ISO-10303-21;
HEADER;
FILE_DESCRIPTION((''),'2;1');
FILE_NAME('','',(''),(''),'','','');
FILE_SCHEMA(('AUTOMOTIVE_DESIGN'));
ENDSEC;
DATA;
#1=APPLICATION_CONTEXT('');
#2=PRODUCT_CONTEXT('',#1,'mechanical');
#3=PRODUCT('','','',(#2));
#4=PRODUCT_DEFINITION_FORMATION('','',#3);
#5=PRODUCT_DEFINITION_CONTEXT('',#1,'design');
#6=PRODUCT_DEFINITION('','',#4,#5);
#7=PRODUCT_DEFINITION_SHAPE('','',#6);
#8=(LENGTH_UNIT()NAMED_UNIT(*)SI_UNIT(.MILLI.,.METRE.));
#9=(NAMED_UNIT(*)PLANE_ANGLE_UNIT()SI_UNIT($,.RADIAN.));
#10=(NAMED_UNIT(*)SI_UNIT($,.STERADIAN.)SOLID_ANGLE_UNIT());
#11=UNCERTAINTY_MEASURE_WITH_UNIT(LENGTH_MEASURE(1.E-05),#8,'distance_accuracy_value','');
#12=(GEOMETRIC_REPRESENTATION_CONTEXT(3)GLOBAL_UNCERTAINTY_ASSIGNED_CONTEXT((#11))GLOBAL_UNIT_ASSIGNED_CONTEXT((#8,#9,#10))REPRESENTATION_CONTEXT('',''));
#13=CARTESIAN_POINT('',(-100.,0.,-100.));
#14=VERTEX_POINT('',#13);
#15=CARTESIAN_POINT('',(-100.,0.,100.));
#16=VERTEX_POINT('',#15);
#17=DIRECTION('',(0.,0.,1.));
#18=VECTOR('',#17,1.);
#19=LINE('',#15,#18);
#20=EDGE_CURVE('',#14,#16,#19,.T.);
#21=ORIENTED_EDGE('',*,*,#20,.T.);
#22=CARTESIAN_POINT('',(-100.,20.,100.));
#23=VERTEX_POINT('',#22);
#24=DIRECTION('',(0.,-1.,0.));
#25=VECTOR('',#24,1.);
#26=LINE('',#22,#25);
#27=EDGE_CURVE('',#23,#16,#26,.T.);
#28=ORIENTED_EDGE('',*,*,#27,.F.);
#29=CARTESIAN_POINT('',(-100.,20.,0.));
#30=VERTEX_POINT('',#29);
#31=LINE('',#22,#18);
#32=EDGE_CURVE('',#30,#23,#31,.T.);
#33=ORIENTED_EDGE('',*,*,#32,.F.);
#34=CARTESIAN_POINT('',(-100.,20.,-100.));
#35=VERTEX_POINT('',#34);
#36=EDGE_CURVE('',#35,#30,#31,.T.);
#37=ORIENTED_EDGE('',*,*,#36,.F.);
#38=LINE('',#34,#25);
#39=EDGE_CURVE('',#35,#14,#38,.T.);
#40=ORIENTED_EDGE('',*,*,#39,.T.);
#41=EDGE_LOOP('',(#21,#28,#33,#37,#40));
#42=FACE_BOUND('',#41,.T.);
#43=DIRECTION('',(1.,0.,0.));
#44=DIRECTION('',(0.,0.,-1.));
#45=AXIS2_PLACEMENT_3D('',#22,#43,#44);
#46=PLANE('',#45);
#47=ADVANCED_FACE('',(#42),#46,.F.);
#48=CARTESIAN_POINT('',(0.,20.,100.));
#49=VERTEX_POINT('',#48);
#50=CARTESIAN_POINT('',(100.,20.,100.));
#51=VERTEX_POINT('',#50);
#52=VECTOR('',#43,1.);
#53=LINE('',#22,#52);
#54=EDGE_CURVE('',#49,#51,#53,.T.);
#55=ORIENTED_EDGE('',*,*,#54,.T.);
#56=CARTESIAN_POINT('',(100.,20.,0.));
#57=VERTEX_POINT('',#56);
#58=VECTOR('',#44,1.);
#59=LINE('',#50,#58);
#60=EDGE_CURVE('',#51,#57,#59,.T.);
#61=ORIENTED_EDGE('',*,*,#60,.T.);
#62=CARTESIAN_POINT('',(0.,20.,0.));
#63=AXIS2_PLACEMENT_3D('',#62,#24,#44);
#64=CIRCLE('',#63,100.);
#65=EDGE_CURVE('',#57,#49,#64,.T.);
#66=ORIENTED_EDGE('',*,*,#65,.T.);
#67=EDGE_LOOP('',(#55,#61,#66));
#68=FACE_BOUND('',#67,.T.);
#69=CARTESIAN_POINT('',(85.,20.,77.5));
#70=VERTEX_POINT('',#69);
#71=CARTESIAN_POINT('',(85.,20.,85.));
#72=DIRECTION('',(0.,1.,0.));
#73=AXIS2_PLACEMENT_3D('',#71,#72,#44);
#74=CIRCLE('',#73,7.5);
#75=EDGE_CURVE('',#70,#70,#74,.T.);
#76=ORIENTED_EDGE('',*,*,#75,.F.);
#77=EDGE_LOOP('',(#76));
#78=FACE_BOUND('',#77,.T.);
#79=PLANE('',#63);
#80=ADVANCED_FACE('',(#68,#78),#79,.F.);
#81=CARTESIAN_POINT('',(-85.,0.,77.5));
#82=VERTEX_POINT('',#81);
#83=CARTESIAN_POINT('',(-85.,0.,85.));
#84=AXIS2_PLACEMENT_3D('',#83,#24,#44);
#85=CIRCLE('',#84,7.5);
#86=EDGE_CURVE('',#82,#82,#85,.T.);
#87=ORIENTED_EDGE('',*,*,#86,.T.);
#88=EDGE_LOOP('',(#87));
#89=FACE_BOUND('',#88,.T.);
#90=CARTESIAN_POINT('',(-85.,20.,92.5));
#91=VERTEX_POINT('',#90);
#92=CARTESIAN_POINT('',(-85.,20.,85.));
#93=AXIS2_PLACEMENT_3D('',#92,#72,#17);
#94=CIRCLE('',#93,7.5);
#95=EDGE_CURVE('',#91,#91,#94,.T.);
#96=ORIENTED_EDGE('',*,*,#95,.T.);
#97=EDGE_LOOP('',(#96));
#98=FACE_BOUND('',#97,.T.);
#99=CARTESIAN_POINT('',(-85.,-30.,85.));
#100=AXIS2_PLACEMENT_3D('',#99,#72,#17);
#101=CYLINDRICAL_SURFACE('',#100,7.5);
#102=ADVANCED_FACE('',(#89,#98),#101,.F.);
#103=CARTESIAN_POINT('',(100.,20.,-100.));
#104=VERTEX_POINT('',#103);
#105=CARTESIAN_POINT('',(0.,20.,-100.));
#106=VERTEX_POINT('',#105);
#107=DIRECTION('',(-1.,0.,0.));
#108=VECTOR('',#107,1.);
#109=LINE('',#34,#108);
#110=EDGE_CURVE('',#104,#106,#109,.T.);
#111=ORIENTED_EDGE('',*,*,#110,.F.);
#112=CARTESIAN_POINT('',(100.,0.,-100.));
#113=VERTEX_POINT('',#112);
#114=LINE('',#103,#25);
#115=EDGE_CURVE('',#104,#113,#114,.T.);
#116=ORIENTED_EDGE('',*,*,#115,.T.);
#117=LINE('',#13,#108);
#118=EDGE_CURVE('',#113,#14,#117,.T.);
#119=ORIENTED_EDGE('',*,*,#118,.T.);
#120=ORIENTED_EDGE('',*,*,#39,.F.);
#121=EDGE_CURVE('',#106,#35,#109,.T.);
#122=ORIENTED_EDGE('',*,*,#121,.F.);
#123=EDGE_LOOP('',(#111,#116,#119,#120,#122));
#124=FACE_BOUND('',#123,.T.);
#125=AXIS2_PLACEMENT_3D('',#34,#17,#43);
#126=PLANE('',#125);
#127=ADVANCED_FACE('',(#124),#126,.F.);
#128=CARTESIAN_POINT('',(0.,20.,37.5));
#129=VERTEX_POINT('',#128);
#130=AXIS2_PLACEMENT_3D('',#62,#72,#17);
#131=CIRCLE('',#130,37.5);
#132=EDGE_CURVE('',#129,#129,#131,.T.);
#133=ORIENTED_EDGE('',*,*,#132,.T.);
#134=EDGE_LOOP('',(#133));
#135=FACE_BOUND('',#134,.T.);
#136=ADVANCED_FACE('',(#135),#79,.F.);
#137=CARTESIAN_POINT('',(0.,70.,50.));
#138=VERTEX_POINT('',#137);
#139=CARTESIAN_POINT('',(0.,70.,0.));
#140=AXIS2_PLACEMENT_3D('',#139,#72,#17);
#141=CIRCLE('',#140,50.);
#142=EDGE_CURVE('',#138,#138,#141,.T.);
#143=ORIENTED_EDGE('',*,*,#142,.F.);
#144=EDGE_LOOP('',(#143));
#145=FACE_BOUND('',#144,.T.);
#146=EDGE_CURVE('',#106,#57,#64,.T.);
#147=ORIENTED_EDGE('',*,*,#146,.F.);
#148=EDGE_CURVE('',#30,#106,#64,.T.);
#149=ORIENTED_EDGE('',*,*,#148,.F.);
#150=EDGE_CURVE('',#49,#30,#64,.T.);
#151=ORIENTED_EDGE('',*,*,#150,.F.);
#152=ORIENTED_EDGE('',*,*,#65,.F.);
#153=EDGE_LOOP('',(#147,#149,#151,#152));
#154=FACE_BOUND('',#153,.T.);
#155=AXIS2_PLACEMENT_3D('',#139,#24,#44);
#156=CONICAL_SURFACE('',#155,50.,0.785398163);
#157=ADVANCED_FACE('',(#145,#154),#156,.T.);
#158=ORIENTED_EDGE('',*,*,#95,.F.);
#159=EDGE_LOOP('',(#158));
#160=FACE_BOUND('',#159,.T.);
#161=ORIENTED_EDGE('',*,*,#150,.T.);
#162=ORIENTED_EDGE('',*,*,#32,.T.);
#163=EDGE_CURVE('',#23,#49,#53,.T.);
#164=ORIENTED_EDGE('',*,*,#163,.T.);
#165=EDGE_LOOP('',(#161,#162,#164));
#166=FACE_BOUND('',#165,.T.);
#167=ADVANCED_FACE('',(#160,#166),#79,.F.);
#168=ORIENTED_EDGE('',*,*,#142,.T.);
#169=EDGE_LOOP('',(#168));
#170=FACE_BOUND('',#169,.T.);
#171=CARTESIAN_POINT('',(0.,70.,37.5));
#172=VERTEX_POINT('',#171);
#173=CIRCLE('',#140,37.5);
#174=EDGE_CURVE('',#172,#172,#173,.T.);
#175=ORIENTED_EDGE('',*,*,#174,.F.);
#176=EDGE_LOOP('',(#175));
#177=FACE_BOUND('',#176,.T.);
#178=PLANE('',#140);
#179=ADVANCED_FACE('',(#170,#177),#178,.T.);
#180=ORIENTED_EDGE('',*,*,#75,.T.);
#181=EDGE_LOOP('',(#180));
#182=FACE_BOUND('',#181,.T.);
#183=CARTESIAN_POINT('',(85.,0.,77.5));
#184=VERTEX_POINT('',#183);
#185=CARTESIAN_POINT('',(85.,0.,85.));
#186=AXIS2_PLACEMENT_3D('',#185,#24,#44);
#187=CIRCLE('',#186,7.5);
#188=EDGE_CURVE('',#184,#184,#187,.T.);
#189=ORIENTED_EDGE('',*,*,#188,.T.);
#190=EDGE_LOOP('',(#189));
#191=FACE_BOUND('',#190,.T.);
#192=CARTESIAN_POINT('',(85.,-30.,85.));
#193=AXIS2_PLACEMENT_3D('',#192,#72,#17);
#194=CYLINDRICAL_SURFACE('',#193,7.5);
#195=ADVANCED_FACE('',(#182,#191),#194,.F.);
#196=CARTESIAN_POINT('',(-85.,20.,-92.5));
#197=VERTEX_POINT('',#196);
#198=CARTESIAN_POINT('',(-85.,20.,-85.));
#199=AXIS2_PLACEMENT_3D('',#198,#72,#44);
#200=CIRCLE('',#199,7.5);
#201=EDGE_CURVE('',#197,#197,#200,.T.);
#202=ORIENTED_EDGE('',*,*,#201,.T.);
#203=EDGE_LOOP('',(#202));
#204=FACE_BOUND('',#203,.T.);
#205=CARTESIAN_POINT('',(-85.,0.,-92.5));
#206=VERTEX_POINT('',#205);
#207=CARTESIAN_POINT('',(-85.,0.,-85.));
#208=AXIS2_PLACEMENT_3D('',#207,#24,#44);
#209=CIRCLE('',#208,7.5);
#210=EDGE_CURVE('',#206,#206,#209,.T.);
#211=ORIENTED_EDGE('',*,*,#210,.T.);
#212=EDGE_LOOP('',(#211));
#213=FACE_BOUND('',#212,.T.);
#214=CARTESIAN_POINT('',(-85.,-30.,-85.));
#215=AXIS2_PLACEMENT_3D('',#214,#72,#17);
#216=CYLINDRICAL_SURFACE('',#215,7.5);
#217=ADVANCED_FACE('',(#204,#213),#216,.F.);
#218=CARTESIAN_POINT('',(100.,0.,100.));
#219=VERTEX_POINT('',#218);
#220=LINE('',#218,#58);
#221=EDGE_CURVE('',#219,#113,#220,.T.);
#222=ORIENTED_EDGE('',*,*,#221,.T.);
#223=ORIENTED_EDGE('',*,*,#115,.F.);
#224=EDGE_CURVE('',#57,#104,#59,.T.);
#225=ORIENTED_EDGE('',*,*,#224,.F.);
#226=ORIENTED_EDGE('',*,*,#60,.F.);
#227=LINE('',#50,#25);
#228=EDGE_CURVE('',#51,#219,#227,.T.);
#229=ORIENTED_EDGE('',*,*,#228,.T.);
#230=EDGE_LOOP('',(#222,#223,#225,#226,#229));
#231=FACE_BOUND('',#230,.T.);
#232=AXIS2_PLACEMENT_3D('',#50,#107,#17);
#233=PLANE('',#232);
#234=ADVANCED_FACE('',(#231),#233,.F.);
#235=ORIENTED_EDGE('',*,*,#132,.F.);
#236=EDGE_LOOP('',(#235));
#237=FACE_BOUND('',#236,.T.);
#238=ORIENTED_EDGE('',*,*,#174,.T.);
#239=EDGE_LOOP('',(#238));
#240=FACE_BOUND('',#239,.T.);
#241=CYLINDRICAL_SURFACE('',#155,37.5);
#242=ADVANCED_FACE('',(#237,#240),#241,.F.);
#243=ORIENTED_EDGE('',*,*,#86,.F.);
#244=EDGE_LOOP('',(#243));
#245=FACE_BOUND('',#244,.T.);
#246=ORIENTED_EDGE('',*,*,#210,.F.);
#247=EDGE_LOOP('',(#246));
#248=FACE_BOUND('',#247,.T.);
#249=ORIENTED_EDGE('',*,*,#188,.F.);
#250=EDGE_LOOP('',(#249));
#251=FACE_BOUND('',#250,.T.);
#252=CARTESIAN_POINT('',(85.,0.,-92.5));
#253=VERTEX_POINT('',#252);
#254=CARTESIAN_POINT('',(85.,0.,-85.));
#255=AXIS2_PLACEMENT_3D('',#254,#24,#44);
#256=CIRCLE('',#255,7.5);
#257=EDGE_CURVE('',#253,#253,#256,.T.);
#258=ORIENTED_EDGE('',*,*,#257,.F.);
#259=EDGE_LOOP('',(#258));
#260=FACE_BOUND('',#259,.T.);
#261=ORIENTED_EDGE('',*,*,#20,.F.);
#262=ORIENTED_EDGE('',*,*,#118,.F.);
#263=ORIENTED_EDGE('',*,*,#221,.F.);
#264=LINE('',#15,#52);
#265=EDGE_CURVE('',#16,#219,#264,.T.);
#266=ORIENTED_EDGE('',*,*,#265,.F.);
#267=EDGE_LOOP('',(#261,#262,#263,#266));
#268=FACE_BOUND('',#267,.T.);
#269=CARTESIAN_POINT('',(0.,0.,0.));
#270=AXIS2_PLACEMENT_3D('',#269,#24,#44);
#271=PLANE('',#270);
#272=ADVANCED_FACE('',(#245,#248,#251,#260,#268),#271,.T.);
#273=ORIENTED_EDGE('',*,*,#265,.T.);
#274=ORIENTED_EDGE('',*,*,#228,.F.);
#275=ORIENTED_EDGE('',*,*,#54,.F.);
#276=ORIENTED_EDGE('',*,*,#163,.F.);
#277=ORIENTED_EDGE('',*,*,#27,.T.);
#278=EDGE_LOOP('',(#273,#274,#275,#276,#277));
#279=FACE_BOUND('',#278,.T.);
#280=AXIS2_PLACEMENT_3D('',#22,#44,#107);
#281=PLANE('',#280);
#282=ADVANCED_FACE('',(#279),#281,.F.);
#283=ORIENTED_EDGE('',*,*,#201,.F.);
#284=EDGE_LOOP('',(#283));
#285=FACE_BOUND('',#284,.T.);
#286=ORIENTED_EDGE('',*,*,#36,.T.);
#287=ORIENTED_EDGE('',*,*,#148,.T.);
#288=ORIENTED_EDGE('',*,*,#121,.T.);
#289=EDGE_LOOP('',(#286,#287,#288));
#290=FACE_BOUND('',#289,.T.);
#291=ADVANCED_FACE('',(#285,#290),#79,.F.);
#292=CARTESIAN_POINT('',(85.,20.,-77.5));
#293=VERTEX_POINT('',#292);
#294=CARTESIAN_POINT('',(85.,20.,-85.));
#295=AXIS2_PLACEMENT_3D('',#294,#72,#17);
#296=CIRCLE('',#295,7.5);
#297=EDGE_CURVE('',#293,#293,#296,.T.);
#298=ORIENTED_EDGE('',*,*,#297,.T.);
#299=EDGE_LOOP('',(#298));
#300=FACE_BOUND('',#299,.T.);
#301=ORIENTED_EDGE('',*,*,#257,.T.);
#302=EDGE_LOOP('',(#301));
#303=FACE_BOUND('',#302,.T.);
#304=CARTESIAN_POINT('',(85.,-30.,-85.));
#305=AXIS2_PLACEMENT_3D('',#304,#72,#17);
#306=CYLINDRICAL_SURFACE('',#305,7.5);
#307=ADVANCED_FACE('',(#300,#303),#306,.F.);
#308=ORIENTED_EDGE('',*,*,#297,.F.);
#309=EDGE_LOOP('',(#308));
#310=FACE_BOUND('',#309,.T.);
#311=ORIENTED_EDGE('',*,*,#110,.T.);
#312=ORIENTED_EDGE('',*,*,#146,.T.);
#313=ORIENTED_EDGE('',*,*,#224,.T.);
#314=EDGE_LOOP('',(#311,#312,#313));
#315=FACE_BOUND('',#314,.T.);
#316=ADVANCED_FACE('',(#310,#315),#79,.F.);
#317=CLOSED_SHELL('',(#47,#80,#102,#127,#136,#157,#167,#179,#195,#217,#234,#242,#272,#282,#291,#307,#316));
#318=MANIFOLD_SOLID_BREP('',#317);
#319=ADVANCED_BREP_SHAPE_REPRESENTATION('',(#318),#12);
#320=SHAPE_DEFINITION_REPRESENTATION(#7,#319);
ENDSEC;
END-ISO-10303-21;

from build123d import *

# Parameters (mm, degrees)
SKIZZE1_W                       = 200
SKIZZE1_H                       = 200
AUFSATZ_LINEAR_AUSTRAGEN1_DEPTH = 20
SKIZZE2_R                       = 50
SKIZZE2_R_2                     = 37.5
AUFSATZ_LINEAR_AUSTRAGEN2_DEPTH = 50
FASE1_SIZE                      = 50
SKIZZE3_R                       = 7.5
SCHNITT_LINEAR_AUSTRAGEN1_DEPTH = 50


with BuildPart() as part:
    # Skizze1 → Aufsatz-Linear austragen1 (new body)
    with BuildSketch(Plane(origin=(0, 0, 0), x_dir=(1, 0, 0), z_dir=(0, 1, 0))):
        Rectangle(SKIZZE1_W, SKIZZE1_H)
    extrude(amount=AUFSATZ_LINEAR_AUSTRAGEN1_DEPTH)

    # Skizze2 → Aufsatz-Linear austragen2 (add)
    with BuildSketch(Plane(origin=(0, 20, 0), x_dir=(1, 0, 0), z_dir=(0, 1, 0))):
        with Locations(Location((0, 0, 0), (0, 0, 90))):
            Circle(SKIZZE2_R)
        with Locations(Location((0, 0, 0), (0, 0, 270))):
            Circle(SKIZZE2_R_2, mode=Mode.SUBTRACT)
    extrude(amount=AUFSATZ_LINEAR_AUSTRAGEN2_DEPTH)

    # Fase1
    fase1_edges = [part.edges().sort_by_distance(p)[0] for p in [
        (0, 20, 50),
    ]]
    chamfer(fase1_edges, length=FASE1_SIZE - 0.0001)  # a hair under: the kernel refuses the full size

    # Skizze3 → Schnitt-Linear austragen1 (cut)
    with BuildSketch(Plane(origin=(0, 20, 0), x_dir=(1, 0, 0), z_dir=(0, 1, 0))):
        with Locations(Location((85, 85, 0), (0, 0, 270))):
            Circle(SKIZZE3_R)
        with Locations(Location((-85, 85, 0), (0, 0, 90))):
            Circle(SKIZZE3_R)
        with Locations(Location((85, -85, 0), (0, 0, 90))):
            Circle(SKIZZE3_R)
        with Locations(Location((-85, -85, 0), (0, 0, 270))):
            Circle(SKIZZE3_R)
    extrude(amount=-SCHNITT_LINEAR_AUSTRAGEN1_DEPTH, mode=Mode.SUBTRACT)


solid = part.part
